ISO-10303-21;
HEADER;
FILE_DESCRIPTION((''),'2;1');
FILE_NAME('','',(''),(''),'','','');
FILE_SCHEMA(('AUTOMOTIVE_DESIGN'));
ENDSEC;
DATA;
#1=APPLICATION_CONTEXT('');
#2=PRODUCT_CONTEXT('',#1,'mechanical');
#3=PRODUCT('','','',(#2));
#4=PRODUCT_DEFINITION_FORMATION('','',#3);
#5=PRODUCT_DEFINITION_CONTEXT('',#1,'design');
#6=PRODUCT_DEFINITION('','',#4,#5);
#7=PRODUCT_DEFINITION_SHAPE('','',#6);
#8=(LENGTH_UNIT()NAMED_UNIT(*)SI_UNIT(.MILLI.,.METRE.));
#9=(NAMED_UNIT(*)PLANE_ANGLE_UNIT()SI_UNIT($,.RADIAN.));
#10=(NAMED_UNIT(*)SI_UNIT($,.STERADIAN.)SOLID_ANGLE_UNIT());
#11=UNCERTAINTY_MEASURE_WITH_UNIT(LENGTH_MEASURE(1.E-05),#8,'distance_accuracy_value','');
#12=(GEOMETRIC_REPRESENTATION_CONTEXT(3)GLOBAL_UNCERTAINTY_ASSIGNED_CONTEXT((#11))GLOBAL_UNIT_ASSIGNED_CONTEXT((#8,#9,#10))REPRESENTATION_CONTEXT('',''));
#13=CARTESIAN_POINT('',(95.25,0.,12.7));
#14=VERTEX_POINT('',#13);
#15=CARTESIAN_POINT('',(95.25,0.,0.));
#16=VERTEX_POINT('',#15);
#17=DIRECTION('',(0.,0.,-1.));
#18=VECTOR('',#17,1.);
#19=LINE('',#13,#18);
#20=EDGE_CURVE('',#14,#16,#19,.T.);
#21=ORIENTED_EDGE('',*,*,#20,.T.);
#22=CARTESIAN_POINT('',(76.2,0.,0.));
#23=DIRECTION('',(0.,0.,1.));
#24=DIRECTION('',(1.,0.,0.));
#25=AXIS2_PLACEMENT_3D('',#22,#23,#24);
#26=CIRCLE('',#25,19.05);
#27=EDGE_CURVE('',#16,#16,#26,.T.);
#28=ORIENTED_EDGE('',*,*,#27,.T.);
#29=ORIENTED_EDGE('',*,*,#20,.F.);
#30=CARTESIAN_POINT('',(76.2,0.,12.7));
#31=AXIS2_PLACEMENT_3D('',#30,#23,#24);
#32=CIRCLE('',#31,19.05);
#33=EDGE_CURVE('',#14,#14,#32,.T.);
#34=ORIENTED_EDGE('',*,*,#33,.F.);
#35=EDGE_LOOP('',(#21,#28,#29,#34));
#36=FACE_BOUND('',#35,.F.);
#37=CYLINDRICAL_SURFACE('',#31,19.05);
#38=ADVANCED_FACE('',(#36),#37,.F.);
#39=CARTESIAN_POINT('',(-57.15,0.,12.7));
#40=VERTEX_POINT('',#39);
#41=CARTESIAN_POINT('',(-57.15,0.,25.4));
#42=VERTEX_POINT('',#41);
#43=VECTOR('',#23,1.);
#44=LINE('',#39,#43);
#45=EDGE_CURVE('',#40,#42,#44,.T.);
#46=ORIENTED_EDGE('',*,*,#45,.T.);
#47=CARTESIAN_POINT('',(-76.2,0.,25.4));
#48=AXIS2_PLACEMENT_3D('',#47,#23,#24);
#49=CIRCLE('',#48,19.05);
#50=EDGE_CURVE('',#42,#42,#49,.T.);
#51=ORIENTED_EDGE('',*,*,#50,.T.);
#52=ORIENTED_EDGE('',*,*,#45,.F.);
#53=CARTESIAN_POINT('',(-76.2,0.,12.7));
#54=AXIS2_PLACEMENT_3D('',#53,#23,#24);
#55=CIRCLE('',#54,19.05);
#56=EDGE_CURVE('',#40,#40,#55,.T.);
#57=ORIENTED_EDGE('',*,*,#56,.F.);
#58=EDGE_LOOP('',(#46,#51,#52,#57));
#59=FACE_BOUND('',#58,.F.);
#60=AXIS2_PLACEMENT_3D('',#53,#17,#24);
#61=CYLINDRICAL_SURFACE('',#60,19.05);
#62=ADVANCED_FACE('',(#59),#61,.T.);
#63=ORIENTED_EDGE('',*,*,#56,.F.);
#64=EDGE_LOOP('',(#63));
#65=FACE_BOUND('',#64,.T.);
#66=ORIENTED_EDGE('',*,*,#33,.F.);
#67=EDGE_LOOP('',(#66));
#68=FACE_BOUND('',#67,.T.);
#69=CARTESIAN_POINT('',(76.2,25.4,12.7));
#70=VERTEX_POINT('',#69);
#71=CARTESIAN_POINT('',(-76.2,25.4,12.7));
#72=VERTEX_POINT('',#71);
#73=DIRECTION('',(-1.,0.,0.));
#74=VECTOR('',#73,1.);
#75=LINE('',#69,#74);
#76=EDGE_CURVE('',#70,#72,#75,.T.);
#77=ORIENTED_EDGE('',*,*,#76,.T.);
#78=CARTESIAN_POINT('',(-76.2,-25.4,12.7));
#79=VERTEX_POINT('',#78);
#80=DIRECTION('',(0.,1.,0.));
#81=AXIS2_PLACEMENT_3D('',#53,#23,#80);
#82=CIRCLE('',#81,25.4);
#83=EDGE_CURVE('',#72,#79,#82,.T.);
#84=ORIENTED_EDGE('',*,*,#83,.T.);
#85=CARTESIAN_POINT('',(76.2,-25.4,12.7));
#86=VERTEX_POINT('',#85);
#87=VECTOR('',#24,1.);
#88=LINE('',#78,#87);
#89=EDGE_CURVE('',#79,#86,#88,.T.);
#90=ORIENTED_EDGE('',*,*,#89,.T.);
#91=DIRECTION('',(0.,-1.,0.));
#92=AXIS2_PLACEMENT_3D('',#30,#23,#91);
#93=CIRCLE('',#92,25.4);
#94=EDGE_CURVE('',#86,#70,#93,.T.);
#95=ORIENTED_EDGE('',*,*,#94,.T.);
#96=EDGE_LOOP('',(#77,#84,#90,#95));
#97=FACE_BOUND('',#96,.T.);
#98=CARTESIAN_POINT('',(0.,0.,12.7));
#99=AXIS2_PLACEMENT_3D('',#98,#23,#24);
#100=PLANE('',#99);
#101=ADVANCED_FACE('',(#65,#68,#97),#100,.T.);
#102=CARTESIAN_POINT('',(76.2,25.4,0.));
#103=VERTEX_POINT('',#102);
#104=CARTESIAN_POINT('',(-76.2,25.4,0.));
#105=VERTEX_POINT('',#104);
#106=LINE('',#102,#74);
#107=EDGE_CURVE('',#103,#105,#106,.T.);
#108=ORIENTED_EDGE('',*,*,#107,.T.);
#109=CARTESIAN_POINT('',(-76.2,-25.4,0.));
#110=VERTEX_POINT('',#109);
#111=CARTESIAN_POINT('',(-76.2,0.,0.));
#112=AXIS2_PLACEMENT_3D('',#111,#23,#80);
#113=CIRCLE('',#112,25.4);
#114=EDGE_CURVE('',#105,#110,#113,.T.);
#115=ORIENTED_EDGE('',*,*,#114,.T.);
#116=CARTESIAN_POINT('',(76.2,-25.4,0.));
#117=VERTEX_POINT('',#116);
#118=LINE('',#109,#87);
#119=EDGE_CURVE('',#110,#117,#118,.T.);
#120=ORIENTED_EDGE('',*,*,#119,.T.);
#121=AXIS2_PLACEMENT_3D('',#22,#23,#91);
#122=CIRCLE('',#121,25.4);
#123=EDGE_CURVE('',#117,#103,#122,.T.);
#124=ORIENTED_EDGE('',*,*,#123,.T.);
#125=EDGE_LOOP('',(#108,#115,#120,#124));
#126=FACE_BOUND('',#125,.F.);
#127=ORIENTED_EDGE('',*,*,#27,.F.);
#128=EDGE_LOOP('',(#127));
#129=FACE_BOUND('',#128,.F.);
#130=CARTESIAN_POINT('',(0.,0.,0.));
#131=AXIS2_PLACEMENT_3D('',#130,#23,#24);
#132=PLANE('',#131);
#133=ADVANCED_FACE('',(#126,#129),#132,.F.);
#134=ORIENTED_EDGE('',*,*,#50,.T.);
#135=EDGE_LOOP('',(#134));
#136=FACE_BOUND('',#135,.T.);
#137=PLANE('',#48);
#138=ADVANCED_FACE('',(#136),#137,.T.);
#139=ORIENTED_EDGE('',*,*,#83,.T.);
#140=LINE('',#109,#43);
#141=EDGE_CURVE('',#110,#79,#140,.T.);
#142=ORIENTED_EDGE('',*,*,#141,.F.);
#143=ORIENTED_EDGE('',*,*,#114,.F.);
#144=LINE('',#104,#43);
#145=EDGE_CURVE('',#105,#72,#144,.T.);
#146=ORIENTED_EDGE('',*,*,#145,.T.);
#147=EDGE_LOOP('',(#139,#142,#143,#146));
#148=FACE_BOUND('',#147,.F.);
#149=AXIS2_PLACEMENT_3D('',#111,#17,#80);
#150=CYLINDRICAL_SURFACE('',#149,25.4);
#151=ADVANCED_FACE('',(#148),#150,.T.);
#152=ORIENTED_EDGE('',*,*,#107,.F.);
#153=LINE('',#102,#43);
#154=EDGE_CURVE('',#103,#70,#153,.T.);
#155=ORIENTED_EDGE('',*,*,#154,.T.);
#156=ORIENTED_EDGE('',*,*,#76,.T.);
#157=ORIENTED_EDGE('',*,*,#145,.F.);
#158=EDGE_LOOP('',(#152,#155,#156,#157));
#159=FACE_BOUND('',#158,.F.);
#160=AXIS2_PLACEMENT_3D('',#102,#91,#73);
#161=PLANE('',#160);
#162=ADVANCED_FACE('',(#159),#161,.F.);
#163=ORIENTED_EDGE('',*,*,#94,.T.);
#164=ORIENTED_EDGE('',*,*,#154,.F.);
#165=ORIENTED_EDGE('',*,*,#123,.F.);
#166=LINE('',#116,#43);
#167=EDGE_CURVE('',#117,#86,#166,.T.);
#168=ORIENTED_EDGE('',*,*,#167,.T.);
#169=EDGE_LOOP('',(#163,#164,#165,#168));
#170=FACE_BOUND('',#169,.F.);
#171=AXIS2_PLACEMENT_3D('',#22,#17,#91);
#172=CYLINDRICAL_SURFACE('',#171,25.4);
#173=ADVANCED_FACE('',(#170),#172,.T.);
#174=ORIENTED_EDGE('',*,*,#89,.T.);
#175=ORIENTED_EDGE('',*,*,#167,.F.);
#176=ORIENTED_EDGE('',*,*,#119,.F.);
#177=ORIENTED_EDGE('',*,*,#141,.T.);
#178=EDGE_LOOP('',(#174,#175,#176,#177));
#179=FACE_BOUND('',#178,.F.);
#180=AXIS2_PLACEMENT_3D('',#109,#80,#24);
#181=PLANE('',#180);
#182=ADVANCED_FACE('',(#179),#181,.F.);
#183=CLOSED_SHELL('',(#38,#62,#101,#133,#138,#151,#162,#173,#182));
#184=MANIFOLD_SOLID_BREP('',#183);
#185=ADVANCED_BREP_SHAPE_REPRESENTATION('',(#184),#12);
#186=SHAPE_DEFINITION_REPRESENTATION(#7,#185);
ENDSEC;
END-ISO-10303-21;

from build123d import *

# Parameters (mm, degrees)
F2_DEPTH = 12.7
F3_R     = 19.05
F4_DEPTH = 12.7
F5_DEPTH = 12.7


# Not quite as in the source:
# - a variable given as a bare number and used for a length is read in inches; the dataset says mm whatever the document's units were


with BuildPart() as f2:
    # F1 (on Top) → F2 (new body)
    with BuildSketch(Plane.XY):
        with BuildLine():
            Line((-76.2, -25.4), (76.2, -25.4))
            ThreePointArc((76.2, -25.4), (101.6, 0), (76.2, 25.4))
            Line((76.2, 25.4), (-76.2, 25.4))
            ThreePointArc((-76.2, 25.4), (-101.6, 0), (-76.2, -25.4))
        make_face()
    extrude(amount=F2_DEPTH)

    # F3 (on face) → F4 (join)
    with BuildSketch(Plane.XY.offset(12.7)):
        with Locations((-76.2, 0)):
            Circle(F3_R)
    extrude(amount=F4_DEPTH)

    # F3 (on face) → F5 (cut)
    with BuildSketch(Plane.XY.offset(12.7)):
        with Locations((76.2, 0)):
            Circle(F3_R)
    extrude(amount=-F5_DEPTH, mode=Mode.SUBTRACT)


solid = f2.part
